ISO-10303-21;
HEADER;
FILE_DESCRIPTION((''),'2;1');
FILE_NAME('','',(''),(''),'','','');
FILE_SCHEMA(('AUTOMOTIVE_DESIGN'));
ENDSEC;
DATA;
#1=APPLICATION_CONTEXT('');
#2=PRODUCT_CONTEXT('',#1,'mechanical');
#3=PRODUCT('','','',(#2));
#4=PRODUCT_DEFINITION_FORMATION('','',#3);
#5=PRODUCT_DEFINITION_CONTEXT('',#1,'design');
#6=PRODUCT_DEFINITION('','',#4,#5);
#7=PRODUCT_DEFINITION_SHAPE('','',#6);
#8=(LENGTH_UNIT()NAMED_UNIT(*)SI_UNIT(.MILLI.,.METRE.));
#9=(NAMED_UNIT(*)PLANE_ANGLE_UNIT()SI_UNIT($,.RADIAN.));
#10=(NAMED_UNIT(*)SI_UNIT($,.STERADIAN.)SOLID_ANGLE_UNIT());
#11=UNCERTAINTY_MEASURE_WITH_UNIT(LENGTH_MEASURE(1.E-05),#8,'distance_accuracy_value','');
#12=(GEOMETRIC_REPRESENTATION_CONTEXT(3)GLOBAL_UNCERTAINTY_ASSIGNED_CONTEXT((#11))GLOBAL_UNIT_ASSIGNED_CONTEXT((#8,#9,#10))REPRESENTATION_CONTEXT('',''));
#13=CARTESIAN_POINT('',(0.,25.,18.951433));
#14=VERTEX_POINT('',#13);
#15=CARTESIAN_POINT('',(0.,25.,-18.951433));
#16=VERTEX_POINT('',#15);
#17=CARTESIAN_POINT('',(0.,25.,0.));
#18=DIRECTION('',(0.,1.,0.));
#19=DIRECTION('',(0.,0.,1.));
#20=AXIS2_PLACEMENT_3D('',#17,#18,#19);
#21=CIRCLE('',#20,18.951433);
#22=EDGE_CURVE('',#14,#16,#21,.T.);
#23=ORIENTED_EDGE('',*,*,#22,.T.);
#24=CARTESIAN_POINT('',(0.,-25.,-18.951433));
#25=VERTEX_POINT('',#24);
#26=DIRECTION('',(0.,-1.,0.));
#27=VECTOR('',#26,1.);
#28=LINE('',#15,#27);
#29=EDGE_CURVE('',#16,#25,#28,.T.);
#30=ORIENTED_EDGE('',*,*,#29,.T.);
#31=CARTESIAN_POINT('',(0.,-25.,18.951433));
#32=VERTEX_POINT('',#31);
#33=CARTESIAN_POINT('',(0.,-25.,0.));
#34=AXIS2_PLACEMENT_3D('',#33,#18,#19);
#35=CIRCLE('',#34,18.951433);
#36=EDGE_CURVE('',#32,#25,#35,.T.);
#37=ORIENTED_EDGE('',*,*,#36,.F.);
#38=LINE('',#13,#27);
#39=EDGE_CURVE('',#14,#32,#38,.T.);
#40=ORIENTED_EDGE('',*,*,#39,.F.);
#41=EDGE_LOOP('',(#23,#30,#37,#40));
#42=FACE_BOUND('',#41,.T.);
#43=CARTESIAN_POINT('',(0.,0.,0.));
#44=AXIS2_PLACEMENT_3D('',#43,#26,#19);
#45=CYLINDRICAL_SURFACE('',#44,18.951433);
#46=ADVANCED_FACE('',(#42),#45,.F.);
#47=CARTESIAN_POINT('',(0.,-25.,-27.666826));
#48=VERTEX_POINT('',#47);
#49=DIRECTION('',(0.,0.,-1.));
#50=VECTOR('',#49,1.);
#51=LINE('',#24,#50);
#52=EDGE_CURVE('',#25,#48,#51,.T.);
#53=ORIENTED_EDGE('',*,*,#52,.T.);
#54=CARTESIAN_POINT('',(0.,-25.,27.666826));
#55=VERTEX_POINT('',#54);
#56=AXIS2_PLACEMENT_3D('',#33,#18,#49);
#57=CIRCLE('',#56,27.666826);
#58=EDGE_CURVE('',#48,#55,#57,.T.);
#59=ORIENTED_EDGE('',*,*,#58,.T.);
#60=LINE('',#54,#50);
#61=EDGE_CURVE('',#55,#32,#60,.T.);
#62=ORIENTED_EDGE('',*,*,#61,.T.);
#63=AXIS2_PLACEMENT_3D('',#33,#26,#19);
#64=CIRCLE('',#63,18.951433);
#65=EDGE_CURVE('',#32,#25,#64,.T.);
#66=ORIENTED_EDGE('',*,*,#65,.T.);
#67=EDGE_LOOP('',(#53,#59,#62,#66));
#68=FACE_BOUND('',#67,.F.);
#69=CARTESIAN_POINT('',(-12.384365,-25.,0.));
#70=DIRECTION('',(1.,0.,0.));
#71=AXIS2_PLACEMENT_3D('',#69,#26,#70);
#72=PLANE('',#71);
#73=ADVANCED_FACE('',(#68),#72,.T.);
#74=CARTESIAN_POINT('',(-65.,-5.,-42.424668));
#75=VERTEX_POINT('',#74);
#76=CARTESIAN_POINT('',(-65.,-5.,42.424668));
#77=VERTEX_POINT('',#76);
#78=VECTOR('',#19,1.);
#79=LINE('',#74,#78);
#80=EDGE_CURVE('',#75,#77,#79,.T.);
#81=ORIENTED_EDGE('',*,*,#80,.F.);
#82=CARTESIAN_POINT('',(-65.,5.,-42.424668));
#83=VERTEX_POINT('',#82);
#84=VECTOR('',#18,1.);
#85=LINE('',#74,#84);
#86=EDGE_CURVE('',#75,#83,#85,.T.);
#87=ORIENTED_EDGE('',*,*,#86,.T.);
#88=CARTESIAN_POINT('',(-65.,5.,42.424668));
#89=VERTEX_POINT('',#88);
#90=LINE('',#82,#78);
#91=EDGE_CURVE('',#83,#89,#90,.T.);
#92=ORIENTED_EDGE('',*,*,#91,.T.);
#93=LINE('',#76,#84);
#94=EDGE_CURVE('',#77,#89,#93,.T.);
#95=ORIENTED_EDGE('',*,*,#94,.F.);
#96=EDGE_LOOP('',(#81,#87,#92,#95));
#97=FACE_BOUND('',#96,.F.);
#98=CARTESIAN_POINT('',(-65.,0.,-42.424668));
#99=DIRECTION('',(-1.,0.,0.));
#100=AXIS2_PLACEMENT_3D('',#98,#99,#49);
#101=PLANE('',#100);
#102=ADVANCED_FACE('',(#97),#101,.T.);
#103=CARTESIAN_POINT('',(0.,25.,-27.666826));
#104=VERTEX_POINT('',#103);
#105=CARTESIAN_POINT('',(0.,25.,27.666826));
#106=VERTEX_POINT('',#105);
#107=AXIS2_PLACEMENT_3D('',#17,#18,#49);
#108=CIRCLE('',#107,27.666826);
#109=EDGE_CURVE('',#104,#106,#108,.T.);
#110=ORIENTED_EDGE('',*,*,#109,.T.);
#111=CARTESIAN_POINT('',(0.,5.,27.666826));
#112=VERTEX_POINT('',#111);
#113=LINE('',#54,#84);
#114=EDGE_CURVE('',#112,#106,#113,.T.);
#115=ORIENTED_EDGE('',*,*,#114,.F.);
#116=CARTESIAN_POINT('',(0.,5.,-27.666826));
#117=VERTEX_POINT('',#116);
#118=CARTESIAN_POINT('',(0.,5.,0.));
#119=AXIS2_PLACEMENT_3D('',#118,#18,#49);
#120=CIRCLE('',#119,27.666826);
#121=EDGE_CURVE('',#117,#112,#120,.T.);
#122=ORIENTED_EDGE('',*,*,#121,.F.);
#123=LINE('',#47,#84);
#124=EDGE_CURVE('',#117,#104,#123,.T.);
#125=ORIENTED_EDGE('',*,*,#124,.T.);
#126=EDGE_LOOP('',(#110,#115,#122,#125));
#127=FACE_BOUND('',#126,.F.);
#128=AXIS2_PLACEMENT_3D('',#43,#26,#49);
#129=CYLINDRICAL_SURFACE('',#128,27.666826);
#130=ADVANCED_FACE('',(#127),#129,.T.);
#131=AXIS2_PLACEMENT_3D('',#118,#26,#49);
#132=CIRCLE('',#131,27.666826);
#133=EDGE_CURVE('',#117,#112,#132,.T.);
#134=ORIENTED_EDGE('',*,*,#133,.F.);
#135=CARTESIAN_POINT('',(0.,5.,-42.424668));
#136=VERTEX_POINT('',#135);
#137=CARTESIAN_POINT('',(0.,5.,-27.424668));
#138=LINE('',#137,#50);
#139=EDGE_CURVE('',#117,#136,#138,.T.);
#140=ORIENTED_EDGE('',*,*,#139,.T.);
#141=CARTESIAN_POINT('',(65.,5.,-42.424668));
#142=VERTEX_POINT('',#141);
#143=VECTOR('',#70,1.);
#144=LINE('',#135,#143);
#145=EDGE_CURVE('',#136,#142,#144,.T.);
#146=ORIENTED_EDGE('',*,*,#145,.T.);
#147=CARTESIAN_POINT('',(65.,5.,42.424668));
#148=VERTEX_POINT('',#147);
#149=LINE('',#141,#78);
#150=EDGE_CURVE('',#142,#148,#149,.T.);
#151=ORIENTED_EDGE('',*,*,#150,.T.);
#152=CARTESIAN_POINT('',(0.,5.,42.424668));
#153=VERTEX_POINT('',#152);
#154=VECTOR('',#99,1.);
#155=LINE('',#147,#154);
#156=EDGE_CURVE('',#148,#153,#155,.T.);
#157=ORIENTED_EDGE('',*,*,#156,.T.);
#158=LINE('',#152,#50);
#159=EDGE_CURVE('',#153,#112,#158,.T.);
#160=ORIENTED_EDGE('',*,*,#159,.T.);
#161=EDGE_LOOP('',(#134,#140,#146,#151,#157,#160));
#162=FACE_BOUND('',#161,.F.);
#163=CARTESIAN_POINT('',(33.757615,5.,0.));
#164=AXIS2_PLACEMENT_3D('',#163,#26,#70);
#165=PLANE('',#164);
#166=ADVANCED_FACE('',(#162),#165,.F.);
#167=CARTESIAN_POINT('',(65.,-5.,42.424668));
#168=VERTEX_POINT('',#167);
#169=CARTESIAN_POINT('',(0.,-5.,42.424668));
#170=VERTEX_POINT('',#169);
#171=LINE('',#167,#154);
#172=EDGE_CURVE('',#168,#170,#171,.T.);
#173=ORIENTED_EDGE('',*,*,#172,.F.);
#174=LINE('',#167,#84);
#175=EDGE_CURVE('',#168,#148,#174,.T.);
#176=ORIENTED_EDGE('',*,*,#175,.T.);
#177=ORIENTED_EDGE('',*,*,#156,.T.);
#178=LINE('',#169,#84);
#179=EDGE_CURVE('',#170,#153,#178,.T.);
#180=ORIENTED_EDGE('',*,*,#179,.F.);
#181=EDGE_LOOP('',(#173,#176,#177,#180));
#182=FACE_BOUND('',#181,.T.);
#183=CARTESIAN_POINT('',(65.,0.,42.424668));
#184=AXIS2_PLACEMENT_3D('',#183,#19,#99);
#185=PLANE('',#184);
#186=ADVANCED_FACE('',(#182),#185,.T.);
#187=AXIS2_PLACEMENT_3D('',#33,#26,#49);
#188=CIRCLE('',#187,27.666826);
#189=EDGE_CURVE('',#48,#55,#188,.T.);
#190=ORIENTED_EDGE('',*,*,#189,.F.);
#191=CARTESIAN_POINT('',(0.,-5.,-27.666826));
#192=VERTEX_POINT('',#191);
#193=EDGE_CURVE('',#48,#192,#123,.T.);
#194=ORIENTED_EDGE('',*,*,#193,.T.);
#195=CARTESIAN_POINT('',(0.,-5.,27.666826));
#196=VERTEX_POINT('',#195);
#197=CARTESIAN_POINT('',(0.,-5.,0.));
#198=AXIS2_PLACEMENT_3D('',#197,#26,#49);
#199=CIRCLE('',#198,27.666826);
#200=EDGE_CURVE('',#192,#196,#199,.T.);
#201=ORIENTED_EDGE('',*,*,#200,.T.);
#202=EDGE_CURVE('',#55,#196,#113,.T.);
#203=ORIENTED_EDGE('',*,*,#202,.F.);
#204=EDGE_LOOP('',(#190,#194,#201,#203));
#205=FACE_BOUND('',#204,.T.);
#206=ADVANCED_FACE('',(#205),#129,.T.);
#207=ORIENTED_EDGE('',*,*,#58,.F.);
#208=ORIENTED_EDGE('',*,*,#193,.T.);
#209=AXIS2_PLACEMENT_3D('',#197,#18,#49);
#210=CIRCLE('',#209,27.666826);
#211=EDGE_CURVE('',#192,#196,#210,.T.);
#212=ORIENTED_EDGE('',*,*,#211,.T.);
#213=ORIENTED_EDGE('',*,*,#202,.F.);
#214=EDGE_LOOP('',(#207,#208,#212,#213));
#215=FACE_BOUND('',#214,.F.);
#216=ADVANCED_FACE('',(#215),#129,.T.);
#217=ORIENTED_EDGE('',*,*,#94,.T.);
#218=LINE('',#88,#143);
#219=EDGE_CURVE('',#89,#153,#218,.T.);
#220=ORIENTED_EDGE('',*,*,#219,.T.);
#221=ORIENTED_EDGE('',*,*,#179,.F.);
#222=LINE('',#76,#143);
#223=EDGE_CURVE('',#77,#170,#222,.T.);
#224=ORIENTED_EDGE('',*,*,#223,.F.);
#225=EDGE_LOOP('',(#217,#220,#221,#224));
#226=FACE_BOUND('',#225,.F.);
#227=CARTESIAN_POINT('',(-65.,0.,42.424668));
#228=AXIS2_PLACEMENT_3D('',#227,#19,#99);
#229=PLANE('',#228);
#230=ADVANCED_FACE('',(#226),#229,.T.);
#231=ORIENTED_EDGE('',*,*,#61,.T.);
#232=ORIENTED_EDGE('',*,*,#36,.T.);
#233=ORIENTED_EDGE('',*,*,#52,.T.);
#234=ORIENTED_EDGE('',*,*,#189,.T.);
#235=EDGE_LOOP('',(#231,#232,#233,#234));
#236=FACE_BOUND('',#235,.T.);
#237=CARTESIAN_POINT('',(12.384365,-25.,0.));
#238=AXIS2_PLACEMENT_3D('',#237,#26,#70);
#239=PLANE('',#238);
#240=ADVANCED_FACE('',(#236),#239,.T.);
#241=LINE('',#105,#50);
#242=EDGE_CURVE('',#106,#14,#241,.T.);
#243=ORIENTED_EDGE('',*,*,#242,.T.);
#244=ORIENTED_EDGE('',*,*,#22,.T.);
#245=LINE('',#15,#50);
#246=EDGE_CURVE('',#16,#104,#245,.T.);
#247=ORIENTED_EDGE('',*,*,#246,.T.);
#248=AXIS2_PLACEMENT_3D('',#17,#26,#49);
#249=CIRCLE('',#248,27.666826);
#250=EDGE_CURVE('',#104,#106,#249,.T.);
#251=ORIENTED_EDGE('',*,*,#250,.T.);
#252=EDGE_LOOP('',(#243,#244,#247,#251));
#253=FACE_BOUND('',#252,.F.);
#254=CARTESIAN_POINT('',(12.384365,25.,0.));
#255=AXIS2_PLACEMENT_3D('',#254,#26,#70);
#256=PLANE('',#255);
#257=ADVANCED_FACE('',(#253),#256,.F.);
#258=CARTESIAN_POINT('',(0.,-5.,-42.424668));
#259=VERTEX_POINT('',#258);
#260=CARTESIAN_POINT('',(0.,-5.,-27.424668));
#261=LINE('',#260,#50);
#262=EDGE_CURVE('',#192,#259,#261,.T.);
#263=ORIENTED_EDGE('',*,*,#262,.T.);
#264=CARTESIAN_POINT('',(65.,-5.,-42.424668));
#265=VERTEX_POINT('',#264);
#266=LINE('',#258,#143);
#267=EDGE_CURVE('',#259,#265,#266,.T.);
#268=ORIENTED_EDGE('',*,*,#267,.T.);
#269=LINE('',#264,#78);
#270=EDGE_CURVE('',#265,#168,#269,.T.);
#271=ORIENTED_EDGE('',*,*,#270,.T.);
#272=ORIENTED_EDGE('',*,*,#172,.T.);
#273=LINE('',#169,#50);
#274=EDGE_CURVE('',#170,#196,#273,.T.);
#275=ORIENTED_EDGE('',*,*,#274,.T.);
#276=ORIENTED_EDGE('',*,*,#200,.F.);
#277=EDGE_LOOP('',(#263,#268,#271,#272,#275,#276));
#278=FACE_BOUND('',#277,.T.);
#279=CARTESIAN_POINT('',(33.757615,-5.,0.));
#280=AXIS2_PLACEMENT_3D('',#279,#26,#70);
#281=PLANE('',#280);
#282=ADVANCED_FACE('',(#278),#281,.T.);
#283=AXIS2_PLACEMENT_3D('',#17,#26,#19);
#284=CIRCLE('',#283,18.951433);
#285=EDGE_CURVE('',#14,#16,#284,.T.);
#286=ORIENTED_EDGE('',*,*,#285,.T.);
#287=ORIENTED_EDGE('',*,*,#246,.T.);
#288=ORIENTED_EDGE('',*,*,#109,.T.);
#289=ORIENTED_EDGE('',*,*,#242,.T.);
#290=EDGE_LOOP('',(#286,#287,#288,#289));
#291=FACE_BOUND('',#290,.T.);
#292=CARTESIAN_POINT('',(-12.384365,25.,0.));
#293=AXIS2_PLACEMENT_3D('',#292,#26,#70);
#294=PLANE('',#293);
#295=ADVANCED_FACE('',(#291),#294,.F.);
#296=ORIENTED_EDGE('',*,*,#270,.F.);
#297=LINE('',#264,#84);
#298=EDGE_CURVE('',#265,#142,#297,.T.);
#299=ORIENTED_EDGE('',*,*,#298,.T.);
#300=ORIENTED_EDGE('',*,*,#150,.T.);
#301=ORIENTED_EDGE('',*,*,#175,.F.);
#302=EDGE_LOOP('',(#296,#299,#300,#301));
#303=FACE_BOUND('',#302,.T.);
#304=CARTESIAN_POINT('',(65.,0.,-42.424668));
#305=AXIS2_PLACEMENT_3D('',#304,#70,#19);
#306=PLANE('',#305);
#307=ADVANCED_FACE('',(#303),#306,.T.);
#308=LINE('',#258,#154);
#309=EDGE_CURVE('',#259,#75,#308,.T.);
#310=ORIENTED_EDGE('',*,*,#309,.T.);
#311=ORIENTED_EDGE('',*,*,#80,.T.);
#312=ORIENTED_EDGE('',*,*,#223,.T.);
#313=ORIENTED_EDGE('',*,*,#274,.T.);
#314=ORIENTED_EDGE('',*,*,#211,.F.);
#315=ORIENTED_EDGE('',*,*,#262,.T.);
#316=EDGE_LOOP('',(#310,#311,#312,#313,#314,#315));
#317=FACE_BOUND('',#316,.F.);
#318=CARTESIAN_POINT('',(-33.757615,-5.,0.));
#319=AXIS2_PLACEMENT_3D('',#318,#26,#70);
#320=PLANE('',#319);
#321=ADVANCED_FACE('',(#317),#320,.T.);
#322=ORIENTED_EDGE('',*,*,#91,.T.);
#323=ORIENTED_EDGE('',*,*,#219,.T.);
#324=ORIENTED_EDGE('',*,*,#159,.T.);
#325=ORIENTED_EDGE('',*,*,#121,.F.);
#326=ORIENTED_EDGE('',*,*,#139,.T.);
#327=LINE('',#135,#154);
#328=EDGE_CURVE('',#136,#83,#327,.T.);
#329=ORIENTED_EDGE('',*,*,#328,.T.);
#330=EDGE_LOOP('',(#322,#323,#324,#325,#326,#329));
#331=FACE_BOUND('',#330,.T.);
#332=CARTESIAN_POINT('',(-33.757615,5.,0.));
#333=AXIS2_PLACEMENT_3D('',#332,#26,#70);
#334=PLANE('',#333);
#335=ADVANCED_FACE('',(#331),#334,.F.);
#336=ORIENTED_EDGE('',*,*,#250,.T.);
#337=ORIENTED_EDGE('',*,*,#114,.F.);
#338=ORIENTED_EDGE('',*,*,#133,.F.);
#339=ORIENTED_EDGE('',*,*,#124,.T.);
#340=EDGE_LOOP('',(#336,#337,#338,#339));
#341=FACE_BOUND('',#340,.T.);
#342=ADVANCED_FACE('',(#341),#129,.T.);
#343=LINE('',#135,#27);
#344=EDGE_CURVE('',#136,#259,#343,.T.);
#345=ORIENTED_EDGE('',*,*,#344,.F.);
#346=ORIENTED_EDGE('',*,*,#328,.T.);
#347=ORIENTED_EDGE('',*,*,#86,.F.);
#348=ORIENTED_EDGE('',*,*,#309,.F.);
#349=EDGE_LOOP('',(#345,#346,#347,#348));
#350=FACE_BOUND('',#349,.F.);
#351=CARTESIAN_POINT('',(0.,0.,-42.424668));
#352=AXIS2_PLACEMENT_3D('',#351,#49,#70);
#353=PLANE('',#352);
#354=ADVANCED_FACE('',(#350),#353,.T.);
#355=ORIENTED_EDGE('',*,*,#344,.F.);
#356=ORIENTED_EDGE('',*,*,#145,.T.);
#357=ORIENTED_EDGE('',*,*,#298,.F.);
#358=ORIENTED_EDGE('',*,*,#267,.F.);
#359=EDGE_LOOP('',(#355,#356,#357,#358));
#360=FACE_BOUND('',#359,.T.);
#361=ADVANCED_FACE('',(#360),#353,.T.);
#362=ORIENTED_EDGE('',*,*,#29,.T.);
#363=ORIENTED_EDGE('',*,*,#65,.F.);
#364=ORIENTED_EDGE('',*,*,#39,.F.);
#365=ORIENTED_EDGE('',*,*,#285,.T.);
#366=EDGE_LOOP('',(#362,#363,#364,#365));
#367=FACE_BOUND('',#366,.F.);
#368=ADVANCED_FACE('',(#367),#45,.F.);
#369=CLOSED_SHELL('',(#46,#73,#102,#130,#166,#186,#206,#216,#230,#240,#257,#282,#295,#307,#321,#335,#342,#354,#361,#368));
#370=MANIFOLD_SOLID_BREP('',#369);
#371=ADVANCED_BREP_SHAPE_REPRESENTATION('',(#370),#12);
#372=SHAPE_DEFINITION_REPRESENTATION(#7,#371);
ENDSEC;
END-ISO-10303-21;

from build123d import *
from build123d import SkipClean  # not in build123d's __all__

# Parameters (mm, degrees)
F1_DEPTH = 25
F3_DEPTH = 5


with BuildPart() as f1:
    # F0 (on Front) → F1 (new body, symmetric)
    with BuildSketch(Plane.XZ):
        with BuildLine():
            Line((0, 27.6668258011), (0, 18.9514327794))
            ThreePointArc((0, 18.9514327794), (18.9514327794, 0), (0, -18.9514327794))
            Line((0, -18.9514327794), (0, -27.6668258011))
            ThreePointArc((0, -27.6668258011), (27.6668258011, 0), (0, 27.6668258011))
        make_face()
    extrude(amount=F1_DEPTH, both=True)

    # F2 (on Front) → F3 (join, symmetric)
    with BuildSketch(Plane.XZ):
        with BuildLine():
            Line((0, 42.4246681583), (0, 27.4246681583))
            ThreePointArc((0, 27.4246681583), (27.4246681583, 0), (0, -27.4246681583))
            Line((0, -27.4246681583), (0, -42.4246681583))
            Line((0, -42.4246681583), (65, -42.4246681583))
            Line((65, -42.4246681583), (65, 42.4246681583))
            Line((65, 42.4246681583), (0, 42.4246681583))
        make_face()
    extrude(amount=F3_DEPTH, both=True)

    # F4: F1 across face


with BuildPart() as f1_1:
    add(f1.part, clean=False)
    with SkipClean():  # cleaning this boolean's faces spoils the solid; the shape is the same uncleaned
        add(f1.part.mirror(Plane(origin=(0, 0, 26.2783197478), x_dir=(0, -1, 0), z_dir=(-1, 0, 0))), clean=False)


solid = f1_1.part
